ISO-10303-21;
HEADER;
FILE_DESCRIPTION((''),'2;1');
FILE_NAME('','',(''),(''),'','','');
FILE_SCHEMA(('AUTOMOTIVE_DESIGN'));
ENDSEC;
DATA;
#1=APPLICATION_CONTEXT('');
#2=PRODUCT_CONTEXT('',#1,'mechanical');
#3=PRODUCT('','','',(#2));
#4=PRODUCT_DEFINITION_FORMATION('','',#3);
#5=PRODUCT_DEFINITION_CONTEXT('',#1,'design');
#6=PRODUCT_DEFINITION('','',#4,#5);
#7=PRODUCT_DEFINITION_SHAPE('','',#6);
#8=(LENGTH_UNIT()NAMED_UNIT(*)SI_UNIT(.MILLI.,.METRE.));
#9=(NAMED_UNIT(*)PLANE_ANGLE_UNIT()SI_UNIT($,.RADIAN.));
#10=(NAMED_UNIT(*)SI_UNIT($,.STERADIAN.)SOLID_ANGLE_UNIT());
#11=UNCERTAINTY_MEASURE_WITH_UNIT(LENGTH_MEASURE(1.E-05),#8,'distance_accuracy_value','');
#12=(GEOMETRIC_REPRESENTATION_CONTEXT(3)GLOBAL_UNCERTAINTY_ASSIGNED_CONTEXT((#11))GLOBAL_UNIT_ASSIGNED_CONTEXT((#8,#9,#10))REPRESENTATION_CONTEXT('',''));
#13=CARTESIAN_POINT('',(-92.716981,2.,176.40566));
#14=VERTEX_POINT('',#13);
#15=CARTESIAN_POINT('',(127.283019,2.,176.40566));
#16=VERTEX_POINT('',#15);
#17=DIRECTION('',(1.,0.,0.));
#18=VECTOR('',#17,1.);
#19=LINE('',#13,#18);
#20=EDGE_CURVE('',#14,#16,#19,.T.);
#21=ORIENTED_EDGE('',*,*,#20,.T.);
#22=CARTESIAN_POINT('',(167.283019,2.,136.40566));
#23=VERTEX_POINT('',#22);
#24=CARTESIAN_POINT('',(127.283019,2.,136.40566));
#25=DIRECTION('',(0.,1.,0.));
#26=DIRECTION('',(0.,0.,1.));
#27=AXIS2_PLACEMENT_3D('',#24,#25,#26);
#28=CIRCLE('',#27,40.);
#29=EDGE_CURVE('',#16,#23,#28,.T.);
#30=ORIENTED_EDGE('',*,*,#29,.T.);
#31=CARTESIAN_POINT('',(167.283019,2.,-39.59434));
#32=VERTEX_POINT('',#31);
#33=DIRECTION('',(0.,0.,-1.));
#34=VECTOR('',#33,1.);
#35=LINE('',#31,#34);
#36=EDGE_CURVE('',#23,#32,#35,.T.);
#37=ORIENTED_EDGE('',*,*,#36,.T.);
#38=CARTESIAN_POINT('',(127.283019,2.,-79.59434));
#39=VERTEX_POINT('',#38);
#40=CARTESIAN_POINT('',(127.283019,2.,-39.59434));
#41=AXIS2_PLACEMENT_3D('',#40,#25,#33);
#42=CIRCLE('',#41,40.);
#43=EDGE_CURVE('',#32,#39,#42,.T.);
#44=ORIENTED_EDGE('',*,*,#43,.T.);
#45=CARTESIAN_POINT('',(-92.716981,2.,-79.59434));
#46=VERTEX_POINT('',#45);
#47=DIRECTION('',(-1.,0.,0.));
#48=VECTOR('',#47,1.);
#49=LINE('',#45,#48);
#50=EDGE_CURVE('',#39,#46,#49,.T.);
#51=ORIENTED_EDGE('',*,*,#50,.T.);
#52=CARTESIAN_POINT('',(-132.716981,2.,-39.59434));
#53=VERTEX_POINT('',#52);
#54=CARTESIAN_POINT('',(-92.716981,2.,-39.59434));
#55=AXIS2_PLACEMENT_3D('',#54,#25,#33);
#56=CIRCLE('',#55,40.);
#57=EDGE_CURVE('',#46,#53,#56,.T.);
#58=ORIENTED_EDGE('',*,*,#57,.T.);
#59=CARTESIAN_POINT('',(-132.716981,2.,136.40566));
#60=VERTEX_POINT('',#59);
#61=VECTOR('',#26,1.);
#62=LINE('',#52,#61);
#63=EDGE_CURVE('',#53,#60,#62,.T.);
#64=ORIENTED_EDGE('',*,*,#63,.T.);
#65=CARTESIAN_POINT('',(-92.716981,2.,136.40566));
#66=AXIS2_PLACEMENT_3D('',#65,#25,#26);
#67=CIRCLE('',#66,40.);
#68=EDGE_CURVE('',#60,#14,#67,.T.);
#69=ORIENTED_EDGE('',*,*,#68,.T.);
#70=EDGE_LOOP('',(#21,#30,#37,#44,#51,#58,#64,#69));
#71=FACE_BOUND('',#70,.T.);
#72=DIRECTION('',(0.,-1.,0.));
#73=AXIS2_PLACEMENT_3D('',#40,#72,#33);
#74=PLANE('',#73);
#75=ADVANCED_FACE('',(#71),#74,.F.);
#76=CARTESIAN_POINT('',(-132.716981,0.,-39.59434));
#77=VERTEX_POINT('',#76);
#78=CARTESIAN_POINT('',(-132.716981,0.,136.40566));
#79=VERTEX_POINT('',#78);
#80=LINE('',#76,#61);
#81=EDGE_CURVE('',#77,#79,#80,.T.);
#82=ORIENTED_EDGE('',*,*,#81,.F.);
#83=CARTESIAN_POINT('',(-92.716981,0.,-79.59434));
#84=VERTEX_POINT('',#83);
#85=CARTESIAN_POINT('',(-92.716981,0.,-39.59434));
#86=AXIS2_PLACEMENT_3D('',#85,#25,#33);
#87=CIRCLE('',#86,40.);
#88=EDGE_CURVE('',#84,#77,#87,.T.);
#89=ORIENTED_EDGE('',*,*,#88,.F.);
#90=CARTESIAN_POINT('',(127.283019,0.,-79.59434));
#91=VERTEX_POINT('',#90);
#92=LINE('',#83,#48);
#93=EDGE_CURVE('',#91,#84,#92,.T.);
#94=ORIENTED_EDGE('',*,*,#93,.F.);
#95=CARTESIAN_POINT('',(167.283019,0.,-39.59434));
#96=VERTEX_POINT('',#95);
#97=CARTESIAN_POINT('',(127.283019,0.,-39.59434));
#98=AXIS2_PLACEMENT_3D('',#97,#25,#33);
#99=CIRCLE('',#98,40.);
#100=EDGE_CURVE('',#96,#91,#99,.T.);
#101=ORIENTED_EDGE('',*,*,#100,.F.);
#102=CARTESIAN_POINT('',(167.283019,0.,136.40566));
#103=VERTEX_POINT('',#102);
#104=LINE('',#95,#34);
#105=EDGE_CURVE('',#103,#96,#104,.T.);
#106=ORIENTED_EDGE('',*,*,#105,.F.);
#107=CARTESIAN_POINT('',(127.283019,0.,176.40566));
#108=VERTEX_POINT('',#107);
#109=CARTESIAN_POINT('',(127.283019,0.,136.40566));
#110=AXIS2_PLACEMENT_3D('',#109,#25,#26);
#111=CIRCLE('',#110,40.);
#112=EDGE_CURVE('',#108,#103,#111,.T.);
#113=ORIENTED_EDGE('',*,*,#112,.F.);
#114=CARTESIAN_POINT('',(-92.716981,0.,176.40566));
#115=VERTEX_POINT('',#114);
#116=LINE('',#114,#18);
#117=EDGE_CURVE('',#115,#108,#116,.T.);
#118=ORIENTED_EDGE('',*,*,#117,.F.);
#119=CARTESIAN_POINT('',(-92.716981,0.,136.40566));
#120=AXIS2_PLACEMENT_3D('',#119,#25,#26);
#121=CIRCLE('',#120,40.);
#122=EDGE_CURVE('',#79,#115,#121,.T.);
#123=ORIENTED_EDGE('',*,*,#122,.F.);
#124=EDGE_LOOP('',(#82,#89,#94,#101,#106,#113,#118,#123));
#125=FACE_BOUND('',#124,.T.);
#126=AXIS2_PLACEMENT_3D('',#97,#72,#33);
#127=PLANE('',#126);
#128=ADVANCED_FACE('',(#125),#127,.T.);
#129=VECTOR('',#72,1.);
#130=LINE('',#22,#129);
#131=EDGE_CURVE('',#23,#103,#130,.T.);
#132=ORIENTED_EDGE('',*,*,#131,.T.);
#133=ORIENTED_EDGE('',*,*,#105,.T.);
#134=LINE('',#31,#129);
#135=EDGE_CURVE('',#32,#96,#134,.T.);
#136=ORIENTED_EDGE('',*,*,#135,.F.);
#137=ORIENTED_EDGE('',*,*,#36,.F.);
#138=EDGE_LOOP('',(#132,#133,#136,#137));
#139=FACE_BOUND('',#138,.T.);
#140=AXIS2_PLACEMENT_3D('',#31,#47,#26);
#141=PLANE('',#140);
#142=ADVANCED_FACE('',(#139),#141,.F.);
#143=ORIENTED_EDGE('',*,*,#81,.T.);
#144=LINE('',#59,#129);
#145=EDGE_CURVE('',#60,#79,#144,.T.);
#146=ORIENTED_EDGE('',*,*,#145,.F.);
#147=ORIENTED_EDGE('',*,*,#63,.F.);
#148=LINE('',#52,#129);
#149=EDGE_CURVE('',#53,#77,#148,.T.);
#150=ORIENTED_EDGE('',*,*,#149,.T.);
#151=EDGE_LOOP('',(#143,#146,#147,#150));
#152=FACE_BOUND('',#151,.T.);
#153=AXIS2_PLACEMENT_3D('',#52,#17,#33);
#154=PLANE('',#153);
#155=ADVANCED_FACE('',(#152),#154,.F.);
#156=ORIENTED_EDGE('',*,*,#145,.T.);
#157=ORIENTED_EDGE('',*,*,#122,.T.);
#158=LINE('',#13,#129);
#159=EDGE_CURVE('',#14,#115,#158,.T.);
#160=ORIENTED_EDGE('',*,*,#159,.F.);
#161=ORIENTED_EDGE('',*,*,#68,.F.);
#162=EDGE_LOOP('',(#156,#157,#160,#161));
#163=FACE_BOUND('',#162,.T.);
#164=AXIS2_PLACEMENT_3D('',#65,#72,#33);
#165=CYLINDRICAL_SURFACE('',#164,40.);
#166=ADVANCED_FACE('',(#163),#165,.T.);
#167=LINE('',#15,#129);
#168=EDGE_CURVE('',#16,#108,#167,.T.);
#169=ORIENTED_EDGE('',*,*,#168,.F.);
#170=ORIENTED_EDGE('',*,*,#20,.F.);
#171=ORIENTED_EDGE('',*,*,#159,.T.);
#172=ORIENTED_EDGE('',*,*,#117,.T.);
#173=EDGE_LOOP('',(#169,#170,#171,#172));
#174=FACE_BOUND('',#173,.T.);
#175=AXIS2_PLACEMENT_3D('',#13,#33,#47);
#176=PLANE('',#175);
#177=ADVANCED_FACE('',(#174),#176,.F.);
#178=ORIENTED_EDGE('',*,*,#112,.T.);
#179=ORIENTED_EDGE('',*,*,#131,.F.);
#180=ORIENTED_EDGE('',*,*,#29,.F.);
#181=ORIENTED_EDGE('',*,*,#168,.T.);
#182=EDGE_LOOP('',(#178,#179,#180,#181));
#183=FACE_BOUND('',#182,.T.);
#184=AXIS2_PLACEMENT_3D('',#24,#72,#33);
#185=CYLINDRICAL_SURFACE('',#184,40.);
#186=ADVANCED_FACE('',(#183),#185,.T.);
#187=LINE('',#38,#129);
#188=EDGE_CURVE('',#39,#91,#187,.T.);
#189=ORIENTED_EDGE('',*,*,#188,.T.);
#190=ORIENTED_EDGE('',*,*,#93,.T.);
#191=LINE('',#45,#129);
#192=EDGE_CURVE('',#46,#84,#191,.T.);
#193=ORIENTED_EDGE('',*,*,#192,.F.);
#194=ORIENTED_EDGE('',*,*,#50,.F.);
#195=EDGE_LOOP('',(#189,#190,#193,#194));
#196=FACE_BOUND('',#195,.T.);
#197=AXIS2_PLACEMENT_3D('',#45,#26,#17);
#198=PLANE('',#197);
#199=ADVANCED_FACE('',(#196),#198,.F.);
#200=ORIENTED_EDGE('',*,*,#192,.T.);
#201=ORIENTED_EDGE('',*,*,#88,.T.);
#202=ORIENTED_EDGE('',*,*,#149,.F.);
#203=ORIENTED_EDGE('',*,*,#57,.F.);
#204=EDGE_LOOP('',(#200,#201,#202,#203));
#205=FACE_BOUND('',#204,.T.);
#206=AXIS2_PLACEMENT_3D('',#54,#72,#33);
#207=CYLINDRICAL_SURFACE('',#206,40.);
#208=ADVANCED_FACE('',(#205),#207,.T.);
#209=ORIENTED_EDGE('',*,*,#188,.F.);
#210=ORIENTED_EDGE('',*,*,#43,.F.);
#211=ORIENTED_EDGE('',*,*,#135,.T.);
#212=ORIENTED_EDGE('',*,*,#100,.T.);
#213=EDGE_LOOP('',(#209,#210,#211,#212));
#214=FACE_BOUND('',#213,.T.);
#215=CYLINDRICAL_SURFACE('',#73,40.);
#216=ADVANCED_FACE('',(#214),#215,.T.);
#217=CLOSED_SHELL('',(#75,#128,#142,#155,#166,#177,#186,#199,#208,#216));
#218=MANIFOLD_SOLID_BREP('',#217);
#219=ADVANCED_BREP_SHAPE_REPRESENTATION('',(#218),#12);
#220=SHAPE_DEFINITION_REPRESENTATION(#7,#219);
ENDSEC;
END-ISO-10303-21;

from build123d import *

# Parameters (mm, degrees)
BOSS_EXTRUDE1_DEPTH = 2


with BuildPart() as part:
    # Sketch1 → Boss-Extrude1 (new body)
    with BuildSketch(Plane(origin=(0, 0, 0), x_dir=(1, 0, 0), z_dir=(0, 1, 0))):
        with BuildLine():
            Line((-92.716981132, 79.594339623), (127.283018868, 79.594339623))
            ThreePointArc((127.283018868, 79.594339623), (155.567290115, 67.87861087), (167.283018868, 39.594339623))
            Line((167.283018868, 39.594339623), (167.283018868, -136.405660377))
            ThreePointArc((167.283018868, -136.405660377), (155.567290115, -164.689931625), (127.283018868, -176.405660377))
            Line((127.283018868, -176.405660377), (-92.716981132, -176.405660377))
            ThreePointArc((-92.716981132, -176.405660377), (-121.00125238, -164.689931625), (-132.716981132, -136.405660377))
            Line((-132.716981132, -136.405660377), (-132.716981132, 39.594339623))
            ThreePointArc((-132.716981132, 39.594339623), (-121.00125238, 67.87861087), (-92.716981132, 79.594339623))
        make_face()
    extrude(amount=BOSS_EXTRUDE1_DEPTH)


solid = part.part
